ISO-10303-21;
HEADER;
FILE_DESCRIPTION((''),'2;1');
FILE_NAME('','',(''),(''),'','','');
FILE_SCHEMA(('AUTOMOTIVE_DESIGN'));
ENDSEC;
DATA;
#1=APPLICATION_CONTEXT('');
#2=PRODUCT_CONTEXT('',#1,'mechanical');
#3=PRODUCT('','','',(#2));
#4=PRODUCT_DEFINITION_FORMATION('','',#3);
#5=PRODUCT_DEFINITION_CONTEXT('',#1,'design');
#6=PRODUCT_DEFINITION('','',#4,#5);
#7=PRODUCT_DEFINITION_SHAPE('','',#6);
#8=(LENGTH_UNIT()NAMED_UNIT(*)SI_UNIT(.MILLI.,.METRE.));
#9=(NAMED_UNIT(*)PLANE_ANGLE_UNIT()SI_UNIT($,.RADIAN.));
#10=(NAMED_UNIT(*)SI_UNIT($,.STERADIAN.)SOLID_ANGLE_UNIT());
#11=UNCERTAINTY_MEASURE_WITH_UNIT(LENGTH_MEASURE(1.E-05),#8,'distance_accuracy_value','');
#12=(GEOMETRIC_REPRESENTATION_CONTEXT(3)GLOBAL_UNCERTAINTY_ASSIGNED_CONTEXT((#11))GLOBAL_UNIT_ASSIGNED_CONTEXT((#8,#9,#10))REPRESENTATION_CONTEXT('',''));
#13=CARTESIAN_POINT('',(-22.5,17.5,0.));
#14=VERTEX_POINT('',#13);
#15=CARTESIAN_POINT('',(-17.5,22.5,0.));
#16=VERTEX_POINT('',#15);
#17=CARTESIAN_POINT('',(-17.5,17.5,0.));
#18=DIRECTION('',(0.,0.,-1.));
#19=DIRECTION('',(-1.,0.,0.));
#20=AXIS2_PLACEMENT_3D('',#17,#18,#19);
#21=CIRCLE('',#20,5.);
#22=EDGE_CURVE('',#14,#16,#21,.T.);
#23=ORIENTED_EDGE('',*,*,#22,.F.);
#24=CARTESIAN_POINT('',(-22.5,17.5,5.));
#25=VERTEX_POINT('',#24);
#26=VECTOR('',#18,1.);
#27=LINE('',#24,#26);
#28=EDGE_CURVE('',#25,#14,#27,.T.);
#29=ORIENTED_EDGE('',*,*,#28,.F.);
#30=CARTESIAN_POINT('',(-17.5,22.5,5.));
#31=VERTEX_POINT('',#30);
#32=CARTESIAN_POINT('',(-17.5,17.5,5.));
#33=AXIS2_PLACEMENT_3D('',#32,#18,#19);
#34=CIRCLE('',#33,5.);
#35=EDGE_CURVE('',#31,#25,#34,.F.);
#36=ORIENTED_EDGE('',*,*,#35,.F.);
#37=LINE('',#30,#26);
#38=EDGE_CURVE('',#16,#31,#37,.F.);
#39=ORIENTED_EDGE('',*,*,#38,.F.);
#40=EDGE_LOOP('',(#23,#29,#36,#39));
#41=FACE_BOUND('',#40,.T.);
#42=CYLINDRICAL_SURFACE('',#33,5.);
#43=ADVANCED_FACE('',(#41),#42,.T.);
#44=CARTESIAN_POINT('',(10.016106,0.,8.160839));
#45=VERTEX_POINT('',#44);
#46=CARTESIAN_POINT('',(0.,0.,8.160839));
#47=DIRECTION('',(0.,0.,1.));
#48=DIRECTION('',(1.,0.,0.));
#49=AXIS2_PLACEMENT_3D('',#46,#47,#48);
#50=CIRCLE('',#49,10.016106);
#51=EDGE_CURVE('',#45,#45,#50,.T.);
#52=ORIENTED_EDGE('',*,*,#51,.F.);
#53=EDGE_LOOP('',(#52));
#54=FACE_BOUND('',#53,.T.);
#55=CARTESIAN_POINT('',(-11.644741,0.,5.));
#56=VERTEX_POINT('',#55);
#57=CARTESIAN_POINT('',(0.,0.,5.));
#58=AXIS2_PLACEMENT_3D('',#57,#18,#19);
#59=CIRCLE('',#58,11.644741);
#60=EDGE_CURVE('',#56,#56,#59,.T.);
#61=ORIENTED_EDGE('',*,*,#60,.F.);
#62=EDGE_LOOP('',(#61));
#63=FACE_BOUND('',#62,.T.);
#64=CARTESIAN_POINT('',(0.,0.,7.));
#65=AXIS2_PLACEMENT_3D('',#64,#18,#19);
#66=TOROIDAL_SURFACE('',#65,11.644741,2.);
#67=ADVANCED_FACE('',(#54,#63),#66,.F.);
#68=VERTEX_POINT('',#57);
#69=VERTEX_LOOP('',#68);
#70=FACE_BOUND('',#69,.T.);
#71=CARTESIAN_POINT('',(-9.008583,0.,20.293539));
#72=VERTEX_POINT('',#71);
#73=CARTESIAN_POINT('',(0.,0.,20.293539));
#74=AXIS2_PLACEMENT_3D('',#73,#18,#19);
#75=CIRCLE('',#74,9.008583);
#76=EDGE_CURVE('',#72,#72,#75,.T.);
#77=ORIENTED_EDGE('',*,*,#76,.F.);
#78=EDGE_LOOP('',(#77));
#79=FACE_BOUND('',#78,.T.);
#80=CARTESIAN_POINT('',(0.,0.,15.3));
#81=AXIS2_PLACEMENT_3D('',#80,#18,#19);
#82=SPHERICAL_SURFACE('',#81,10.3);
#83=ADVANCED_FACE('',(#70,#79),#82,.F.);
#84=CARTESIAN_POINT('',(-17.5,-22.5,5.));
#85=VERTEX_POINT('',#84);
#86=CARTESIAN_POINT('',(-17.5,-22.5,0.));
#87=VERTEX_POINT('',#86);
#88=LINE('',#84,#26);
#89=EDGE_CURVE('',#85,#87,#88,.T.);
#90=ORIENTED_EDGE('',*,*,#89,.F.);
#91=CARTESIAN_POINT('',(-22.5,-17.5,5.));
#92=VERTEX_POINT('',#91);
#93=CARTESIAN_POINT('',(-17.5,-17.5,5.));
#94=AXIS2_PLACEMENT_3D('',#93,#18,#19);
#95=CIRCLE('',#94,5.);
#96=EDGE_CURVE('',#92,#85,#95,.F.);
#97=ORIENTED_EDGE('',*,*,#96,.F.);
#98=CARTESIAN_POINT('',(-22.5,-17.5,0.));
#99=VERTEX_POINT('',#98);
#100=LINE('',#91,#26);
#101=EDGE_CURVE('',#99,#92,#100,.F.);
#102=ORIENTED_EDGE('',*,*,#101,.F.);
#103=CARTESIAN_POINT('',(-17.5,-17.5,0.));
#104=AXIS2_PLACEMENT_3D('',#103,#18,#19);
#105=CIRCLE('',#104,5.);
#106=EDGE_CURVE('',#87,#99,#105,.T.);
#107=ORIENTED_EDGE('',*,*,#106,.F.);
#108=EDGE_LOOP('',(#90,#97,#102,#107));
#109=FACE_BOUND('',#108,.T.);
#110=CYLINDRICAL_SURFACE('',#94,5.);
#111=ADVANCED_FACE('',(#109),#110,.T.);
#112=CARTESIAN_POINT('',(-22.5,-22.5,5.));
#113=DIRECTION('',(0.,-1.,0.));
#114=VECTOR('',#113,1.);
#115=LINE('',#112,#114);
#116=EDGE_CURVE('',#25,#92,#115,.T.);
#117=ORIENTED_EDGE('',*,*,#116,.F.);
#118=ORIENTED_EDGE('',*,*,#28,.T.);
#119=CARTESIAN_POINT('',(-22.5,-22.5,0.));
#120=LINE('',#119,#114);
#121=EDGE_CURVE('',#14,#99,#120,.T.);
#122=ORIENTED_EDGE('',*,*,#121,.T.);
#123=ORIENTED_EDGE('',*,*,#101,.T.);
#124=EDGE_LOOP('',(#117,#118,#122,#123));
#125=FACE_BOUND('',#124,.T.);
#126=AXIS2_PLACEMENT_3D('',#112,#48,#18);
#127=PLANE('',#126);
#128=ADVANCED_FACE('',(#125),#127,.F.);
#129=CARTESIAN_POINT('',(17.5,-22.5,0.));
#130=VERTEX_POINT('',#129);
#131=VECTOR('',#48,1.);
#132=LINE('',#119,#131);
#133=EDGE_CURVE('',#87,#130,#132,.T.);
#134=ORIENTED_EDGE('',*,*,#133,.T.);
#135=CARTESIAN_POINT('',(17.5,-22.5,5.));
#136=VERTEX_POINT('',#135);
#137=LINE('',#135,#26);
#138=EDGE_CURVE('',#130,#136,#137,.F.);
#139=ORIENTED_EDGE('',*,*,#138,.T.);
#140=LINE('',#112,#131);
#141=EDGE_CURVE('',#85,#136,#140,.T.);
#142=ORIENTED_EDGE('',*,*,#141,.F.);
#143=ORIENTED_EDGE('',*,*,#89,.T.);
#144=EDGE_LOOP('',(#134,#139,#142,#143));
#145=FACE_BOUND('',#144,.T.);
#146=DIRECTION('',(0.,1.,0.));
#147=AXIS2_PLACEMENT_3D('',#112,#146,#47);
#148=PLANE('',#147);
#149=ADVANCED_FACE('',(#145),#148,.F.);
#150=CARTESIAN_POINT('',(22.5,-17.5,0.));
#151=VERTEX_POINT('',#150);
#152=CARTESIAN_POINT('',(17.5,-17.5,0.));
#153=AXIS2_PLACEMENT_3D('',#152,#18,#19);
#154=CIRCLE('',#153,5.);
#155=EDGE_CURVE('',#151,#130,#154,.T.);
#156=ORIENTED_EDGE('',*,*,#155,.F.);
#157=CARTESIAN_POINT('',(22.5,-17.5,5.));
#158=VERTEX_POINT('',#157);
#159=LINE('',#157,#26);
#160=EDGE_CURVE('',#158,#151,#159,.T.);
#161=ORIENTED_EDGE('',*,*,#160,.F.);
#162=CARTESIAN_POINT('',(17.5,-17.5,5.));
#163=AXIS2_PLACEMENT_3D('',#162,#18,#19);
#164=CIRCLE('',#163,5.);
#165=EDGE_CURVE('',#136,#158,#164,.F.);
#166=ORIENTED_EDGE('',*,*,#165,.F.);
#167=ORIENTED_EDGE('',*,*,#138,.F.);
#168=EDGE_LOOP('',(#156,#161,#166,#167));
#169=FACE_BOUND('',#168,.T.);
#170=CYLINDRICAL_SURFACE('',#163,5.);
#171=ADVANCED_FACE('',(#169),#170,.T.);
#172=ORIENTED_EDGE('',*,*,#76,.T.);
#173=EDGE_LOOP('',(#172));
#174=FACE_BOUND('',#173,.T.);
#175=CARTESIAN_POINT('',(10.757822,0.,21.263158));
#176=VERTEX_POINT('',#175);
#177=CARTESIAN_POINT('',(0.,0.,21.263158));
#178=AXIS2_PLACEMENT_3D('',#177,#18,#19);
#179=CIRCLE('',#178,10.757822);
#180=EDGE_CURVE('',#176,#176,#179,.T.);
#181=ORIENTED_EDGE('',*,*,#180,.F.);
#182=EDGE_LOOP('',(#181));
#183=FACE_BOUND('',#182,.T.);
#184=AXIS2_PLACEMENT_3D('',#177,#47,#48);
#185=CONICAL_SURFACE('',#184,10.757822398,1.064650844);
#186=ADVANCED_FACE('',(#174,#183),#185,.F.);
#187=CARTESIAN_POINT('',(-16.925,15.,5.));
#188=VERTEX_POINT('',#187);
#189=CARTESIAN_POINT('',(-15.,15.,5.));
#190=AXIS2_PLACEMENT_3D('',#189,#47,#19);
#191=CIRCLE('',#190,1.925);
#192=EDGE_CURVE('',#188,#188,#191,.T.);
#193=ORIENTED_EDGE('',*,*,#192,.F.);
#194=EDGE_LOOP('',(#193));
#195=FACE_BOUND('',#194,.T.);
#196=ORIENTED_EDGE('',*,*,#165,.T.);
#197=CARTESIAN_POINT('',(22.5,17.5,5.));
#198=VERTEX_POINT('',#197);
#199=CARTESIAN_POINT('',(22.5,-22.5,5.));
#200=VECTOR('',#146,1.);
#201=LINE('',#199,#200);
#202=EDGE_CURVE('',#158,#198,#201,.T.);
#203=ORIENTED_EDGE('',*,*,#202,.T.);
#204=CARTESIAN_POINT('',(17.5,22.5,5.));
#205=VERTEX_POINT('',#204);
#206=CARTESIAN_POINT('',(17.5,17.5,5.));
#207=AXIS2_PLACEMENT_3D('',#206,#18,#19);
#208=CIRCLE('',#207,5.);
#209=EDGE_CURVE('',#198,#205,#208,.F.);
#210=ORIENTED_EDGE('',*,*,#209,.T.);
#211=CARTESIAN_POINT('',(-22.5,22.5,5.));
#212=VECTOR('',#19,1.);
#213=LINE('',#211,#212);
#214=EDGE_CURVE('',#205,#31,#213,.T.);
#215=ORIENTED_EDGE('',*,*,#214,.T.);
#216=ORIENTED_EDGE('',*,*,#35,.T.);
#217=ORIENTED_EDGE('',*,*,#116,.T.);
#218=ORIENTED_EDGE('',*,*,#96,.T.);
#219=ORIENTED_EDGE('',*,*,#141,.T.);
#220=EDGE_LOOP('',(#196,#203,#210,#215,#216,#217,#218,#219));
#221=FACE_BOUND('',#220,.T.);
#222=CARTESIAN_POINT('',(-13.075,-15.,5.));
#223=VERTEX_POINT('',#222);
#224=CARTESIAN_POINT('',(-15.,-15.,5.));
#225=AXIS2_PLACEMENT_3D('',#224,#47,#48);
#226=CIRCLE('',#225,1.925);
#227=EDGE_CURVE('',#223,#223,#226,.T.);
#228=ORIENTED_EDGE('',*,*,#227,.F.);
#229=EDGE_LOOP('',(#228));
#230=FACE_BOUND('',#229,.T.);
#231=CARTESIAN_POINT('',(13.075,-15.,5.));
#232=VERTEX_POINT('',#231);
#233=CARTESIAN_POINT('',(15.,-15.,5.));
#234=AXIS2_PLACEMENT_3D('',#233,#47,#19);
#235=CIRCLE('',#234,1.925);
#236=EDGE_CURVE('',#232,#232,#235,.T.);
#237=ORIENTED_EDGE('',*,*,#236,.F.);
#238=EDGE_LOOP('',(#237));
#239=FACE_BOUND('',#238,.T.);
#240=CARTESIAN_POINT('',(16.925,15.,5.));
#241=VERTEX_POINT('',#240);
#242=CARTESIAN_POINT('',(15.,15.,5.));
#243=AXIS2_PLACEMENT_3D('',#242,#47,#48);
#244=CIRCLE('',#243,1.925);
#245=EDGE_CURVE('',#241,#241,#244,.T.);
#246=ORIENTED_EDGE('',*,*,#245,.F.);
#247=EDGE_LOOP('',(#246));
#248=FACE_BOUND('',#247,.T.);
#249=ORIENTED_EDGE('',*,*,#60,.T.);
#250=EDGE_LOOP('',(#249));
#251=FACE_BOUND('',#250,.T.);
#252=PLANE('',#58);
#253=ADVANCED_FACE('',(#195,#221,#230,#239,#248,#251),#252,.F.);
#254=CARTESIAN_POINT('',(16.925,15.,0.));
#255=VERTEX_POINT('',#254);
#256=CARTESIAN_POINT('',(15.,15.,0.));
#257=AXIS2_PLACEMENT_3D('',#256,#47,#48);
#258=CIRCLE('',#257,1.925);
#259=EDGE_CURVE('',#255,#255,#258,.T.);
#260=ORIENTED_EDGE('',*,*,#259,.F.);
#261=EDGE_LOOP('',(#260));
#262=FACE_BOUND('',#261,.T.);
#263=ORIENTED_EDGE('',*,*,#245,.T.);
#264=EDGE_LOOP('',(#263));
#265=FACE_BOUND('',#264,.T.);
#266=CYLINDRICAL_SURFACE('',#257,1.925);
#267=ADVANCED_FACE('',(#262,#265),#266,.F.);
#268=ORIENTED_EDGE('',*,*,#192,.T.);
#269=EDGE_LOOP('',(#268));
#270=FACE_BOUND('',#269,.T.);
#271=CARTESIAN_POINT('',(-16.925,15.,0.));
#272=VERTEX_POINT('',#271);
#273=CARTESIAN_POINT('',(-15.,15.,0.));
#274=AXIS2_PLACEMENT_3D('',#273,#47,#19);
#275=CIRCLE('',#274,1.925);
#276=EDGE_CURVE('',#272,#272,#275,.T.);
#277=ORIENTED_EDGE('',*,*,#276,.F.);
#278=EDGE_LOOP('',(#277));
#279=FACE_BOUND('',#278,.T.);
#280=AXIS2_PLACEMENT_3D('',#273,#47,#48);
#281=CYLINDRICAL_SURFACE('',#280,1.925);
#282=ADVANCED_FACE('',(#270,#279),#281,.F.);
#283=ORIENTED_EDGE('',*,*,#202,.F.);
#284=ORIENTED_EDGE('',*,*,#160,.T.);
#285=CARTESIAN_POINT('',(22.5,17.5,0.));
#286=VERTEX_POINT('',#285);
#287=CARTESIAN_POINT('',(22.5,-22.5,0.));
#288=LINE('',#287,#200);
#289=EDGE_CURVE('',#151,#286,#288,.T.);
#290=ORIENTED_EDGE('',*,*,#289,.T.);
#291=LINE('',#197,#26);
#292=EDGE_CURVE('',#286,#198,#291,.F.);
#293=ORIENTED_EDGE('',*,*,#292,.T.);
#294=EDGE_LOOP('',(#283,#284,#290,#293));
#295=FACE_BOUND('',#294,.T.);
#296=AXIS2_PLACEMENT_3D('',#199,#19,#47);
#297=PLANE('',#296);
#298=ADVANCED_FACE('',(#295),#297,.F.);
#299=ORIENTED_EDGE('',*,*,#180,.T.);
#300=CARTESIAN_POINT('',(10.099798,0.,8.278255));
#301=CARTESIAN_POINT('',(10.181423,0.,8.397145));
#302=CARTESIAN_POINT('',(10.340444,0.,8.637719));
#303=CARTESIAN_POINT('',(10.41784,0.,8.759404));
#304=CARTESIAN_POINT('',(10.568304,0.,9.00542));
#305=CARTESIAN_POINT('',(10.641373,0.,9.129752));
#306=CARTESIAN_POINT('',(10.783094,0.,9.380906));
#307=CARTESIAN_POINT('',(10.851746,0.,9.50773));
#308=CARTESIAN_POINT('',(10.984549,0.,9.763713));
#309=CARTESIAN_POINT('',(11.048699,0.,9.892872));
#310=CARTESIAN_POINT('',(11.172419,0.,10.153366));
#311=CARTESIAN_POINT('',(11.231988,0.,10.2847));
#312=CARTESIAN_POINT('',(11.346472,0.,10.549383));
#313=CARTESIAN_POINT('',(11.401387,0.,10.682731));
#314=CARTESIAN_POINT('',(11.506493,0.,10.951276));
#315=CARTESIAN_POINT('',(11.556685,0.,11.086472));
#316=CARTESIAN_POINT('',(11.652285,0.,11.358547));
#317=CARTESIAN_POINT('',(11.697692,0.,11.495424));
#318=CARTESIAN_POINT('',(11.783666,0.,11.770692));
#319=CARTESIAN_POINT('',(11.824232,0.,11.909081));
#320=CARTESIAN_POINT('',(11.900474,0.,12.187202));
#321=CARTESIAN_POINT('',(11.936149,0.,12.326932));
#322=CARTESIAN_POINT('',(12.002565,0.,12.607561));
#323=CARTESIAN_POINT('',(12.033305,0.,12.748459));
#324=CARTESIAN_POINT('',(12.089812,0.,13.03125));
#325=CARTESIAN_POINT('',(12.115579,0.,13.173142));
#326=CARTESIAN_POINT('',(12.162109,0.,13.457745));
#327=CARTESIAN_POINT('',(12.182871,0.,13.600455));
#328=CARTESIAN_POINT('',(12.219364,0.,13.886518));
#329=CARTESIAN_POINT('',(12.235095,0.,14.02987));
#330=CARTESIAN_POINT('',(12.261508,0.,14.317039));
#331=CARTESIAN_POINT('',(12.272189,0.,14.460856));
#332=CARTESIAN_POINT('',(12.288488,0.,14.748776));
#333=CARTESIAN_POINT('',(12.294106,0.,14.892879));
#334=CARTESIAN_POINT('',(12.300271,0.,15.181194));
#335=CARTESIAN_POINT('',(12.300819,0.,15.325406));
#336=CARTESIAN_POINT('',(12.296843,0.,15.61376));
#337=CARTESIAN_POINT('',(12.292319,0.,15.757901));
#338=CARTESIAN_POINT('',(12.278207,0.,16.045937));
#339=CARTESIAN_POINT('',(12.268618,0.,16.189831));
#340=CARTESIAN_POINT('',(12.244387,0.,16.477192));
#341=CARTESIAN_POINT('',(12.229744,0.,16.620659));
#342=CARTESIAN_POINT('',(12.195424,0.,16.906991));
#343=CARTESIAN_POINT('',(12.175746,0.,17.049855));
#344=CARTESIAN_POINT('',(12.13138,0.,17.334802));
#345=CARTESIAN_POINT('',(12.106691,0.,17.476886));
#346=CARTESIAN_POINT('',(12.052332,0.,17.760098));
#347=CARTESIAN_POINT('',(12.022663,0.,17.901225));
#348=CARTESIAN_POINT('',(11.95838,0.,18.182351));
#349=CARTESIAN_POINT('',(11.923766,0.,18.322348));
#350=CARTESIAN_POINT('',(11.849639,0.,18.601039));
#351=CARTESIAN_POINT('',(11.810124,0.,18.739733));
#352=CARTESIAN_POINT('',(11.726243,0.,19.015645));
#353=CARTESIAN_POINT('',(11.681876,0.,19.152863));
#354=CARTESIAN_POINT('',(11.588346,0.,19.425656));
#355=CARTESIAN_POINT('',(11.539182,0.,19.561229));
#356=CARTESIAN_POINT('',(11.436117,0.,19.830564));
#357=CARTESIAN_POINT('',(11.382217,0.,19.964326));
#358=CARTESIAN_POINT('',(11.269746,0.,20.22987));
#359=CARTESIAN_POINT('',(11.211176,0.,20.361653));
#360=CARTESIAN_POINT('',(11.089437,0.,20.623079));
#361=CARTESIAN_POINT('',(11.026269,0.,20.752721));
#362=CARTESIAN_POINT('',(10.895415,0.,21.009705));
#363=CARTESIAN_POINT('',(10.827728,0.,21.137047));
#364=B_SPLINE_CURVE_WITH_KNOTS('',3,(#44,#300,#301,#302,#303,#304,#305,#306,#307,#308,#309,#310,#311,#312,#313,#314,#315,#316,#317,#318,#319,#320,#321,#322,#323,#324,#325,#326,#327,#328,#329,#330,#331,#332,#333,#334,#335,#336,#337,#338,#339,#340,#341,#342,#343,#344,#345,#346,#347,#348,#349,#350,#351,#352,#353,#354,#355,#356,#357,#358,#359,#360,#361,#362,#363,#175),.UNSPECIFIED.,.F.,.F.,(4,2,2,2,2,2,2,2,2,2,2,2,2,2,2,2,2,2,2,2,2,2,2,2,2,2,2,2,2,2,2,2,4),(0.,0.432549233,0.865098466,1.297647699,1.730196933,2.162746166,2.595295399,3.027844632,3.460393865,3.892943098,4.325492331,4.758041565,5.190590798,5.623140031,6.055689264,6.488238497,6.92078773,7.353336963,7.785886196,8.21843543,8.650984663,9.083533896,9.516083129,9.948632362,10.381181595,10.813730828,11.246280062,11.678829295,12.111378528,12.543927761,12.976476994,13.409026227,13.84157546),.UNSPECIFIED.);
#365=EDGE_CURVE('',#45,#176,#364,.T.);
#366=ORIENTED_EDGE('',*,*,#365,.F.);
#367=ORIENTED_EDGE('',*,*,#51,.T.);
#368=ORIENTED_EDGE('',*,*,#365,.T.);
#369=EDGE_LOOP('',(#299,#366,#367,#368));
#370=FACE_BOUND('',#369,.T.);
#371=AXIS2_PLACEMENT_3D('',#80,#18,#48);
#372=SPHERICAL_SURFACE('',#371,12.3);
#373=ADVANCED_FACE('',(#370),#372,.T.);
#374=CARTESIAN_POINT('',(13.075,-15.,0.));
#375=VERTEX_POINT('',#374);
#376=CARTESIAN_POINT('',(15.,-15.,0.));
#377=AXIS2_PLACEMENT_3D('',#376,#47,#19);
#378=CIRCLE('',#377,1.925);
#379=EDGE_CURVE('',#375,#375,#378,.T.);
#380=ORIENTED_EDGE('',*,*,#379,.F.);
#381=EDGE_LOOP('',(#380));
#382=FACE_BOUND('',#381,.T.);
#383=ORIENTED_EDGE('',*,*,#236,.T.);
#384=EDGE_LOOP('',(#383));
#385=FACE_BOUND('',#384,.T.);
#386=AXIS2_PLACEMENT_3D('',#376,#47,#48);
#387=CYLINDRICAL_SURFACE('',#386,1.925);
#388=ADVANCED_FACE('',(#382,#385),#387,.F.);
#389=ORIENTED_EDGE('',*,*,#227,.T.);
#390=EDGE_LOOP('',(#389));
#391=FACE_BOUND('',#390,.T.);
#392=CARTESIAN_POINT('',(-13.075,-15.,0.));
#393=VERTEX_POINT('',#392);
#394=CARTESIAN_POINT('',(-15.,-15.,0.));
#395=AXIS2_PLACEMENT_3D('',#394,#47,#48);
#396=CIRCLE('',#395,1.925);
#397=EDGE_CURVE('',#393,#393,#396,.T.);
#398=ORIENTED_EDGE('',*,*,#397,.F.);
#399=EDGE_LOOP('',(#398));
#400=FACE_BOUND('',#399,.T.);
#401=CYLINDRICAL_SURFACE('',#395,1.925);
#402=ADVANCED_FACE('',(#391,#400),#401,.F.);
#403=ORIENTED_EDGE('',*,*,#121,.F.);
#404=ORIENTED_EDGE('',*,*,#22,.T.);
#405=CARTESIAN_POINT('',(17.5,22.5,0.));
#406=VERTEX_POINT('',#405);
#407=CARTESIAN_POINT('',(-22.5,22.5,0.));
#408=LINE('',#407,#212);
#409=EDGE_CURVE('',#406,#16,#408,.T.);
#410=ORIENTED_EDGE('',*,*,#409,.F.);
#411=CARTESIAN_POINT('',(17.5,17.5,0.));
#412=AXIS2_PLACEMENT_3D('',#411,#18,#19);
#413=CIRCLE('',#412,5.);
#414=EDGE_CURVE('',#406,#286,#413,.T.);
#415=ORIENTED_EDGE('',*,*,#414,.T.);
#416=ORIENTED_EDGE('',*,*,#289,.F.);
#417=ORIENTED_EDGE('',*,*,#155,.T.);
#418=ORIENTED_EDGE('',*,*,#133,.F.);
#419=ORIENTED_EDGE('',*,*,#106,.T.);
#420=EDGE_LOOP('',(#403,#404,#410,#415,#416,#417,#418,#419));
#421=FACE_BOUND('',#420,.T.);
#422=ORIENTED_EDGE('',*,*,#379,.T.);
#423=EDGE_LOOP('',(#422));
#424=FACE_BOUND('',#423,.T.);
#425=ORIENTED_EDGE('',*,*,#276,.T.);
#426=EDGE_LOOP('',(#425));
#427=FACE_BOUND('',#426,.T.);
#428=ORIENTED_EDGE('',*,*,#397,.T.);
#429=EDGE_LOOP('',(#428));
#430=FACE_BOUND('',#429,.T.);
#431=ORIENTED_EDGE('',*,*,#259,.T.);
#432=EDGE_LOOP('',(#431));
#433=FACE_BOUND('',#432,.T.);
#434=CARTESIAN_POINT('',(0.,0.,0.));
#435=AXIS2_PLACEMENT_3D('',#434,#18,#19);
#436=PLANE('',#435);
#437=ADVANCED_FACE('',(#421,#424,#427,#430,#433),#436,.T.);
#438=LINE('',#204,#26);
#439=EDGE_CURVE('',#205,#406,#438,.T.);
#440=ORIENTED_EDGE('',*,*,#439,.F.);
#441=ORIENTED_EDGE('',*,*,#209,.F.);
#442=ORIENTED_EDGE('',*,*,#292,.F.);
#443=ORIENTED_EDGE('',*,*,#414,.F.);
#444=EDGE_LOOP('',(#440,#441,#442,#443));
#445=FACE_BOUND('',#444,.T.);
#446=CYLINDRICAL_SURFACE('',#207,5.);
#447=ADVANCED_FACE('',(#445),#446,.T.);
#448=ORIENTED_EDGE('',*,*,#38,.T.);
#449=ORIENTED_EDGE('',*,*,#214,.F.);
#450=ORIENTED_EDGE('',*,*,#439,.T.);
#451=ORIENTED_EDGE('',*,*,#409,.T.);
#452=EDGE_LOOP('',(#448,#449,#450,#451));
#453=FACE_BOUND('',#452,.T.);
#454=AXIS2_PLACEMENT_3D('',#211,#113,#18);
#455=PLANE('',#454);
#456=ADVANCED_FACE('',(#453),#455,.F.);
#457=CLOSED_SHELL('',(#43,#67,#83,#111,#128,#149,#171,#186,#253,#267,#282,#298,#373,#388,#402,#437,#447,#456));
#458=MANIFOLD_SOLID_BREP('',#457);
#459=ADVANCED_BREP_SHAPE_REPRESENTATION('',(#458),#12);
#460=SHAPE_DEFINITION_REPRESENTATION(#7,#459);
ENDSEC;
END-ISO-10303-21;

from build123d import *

# Parameters (mm, degrees)
SKETCH1_W           = 45
SKETCH1_H           = 45
BOSS_EXTRUDE1_DEPTH = 5
FILLET1_R           = 5
SKETCH2_R           = 1.925
CUT_EXTRUDE1_DEPTH  = 33.210246817
FILLET2_R           = 2


with BuildPart() as part:
    # Sketch1 → Boss-Extrude1 (new body)
    with BuildSketch(Plane.XY):
        Rectangle(SKETCH1_W, SKETCH1_H)
    extrude(amount=BOSS_EXTRUDE1_DEPTH)

    # Fillet1
    fillet1_edges = [part.edges().sort_by_distance(p)[0] for p in [
        (22.5, -22.5, 2.5),
        (-22.5, -22.5, 2.5),
        (-22.5, 22.5, 2.5),
        (22.5, 22.5, 2.5),
    ]]
    fillet(fillet1_edges, radius=FILLET1_R)

    # Sketch2 → Cut-Extrude1 (cut, through all)
    with BuildSketch(Plane.XY.offset(5)):
        with Locations((15, 15)):
            Circle(SKETCH2_R)
        with Locations(Location((15, -15, 0), (0, 0, 180))):
            Circle(SKETCH2_R)
        with Locations((-15, -15)):
            Circle(SKETCH2_R)
        with Locations(Location((-15, 15, 0), (0, 0, 180))):
            Circle(SKETCH2_R)
    extrude(amount=-CUT_EXTRUDE1_DEPTH, mode=Mode.SUBTRACT)

    # Sketch3 → Revolve5 (revolve)
    with BuildSketch(Plane(origin=(0, 0, 0), x_dir=(1, 0, 0), z_dir=(0, 1, 0))):
        with BuildLine():
            Line((0, -3), (0, -5))
            ThreePointArc((0, -5), (10.3, -15.3), (0, -25.6))
            Line((0, -25.6), (0, -27.6))
            ThreePointArc((0, -27.6), (12.3, -15.3), (0, -3))
        make_face()
    revolve(axis=Axis((0, 0, 3), (0, 0, 1)))

    # Fillet2
    fillet2_edges = [part.edges().sort_by_distance(p)[0] for p in [
        (-6.723094526, 0, 5),
    ]]
    fillet(fillet2_edges, radius=FILLET2_R)

    # Cut-Revolve9: read off the stored shape, not the designer's step
    # Cut-Revolve9 outline → Cut-Revolve9 (revolve, cut)
    with BuildSketch(Plane.XZ):
        Polygon((9.008582984, 21.263158329), (9.008582984, 20.293539089), (10.757822398, 21.263158329), align=None)
    revolve(axis=Axis((0, 0, 0), (0, 0, 1)), mode=Mode.SUBTRACT)

    # Cut-Revolve9 2 outline → Cut-Revolve9 2 (revolve, cut)
    with BuildSketch(Plane.XZ):
        with BuildLine():
            Line((9.008582984, 21.263158329), (10.757822401, 21.263158323))
            ThreePointArc((10.757822401, 21.263158323), (6.242721867, 25.898038672), (0, 27.6))
            Line((0, 27.6), (0, 25.6))
            ThreePointArc((0, 25.6), (5.227645138, 24.174780353), (9.008582983, 20.293539089))
            Line((9.008582983, 20.293539089), (9.008582984, 21.263158329))
        make_face()
    revolve(axis=Axis((0, 0, 0), (0, 0, 1)), mode=Mode.SUBTRACT)


solid = part.part
